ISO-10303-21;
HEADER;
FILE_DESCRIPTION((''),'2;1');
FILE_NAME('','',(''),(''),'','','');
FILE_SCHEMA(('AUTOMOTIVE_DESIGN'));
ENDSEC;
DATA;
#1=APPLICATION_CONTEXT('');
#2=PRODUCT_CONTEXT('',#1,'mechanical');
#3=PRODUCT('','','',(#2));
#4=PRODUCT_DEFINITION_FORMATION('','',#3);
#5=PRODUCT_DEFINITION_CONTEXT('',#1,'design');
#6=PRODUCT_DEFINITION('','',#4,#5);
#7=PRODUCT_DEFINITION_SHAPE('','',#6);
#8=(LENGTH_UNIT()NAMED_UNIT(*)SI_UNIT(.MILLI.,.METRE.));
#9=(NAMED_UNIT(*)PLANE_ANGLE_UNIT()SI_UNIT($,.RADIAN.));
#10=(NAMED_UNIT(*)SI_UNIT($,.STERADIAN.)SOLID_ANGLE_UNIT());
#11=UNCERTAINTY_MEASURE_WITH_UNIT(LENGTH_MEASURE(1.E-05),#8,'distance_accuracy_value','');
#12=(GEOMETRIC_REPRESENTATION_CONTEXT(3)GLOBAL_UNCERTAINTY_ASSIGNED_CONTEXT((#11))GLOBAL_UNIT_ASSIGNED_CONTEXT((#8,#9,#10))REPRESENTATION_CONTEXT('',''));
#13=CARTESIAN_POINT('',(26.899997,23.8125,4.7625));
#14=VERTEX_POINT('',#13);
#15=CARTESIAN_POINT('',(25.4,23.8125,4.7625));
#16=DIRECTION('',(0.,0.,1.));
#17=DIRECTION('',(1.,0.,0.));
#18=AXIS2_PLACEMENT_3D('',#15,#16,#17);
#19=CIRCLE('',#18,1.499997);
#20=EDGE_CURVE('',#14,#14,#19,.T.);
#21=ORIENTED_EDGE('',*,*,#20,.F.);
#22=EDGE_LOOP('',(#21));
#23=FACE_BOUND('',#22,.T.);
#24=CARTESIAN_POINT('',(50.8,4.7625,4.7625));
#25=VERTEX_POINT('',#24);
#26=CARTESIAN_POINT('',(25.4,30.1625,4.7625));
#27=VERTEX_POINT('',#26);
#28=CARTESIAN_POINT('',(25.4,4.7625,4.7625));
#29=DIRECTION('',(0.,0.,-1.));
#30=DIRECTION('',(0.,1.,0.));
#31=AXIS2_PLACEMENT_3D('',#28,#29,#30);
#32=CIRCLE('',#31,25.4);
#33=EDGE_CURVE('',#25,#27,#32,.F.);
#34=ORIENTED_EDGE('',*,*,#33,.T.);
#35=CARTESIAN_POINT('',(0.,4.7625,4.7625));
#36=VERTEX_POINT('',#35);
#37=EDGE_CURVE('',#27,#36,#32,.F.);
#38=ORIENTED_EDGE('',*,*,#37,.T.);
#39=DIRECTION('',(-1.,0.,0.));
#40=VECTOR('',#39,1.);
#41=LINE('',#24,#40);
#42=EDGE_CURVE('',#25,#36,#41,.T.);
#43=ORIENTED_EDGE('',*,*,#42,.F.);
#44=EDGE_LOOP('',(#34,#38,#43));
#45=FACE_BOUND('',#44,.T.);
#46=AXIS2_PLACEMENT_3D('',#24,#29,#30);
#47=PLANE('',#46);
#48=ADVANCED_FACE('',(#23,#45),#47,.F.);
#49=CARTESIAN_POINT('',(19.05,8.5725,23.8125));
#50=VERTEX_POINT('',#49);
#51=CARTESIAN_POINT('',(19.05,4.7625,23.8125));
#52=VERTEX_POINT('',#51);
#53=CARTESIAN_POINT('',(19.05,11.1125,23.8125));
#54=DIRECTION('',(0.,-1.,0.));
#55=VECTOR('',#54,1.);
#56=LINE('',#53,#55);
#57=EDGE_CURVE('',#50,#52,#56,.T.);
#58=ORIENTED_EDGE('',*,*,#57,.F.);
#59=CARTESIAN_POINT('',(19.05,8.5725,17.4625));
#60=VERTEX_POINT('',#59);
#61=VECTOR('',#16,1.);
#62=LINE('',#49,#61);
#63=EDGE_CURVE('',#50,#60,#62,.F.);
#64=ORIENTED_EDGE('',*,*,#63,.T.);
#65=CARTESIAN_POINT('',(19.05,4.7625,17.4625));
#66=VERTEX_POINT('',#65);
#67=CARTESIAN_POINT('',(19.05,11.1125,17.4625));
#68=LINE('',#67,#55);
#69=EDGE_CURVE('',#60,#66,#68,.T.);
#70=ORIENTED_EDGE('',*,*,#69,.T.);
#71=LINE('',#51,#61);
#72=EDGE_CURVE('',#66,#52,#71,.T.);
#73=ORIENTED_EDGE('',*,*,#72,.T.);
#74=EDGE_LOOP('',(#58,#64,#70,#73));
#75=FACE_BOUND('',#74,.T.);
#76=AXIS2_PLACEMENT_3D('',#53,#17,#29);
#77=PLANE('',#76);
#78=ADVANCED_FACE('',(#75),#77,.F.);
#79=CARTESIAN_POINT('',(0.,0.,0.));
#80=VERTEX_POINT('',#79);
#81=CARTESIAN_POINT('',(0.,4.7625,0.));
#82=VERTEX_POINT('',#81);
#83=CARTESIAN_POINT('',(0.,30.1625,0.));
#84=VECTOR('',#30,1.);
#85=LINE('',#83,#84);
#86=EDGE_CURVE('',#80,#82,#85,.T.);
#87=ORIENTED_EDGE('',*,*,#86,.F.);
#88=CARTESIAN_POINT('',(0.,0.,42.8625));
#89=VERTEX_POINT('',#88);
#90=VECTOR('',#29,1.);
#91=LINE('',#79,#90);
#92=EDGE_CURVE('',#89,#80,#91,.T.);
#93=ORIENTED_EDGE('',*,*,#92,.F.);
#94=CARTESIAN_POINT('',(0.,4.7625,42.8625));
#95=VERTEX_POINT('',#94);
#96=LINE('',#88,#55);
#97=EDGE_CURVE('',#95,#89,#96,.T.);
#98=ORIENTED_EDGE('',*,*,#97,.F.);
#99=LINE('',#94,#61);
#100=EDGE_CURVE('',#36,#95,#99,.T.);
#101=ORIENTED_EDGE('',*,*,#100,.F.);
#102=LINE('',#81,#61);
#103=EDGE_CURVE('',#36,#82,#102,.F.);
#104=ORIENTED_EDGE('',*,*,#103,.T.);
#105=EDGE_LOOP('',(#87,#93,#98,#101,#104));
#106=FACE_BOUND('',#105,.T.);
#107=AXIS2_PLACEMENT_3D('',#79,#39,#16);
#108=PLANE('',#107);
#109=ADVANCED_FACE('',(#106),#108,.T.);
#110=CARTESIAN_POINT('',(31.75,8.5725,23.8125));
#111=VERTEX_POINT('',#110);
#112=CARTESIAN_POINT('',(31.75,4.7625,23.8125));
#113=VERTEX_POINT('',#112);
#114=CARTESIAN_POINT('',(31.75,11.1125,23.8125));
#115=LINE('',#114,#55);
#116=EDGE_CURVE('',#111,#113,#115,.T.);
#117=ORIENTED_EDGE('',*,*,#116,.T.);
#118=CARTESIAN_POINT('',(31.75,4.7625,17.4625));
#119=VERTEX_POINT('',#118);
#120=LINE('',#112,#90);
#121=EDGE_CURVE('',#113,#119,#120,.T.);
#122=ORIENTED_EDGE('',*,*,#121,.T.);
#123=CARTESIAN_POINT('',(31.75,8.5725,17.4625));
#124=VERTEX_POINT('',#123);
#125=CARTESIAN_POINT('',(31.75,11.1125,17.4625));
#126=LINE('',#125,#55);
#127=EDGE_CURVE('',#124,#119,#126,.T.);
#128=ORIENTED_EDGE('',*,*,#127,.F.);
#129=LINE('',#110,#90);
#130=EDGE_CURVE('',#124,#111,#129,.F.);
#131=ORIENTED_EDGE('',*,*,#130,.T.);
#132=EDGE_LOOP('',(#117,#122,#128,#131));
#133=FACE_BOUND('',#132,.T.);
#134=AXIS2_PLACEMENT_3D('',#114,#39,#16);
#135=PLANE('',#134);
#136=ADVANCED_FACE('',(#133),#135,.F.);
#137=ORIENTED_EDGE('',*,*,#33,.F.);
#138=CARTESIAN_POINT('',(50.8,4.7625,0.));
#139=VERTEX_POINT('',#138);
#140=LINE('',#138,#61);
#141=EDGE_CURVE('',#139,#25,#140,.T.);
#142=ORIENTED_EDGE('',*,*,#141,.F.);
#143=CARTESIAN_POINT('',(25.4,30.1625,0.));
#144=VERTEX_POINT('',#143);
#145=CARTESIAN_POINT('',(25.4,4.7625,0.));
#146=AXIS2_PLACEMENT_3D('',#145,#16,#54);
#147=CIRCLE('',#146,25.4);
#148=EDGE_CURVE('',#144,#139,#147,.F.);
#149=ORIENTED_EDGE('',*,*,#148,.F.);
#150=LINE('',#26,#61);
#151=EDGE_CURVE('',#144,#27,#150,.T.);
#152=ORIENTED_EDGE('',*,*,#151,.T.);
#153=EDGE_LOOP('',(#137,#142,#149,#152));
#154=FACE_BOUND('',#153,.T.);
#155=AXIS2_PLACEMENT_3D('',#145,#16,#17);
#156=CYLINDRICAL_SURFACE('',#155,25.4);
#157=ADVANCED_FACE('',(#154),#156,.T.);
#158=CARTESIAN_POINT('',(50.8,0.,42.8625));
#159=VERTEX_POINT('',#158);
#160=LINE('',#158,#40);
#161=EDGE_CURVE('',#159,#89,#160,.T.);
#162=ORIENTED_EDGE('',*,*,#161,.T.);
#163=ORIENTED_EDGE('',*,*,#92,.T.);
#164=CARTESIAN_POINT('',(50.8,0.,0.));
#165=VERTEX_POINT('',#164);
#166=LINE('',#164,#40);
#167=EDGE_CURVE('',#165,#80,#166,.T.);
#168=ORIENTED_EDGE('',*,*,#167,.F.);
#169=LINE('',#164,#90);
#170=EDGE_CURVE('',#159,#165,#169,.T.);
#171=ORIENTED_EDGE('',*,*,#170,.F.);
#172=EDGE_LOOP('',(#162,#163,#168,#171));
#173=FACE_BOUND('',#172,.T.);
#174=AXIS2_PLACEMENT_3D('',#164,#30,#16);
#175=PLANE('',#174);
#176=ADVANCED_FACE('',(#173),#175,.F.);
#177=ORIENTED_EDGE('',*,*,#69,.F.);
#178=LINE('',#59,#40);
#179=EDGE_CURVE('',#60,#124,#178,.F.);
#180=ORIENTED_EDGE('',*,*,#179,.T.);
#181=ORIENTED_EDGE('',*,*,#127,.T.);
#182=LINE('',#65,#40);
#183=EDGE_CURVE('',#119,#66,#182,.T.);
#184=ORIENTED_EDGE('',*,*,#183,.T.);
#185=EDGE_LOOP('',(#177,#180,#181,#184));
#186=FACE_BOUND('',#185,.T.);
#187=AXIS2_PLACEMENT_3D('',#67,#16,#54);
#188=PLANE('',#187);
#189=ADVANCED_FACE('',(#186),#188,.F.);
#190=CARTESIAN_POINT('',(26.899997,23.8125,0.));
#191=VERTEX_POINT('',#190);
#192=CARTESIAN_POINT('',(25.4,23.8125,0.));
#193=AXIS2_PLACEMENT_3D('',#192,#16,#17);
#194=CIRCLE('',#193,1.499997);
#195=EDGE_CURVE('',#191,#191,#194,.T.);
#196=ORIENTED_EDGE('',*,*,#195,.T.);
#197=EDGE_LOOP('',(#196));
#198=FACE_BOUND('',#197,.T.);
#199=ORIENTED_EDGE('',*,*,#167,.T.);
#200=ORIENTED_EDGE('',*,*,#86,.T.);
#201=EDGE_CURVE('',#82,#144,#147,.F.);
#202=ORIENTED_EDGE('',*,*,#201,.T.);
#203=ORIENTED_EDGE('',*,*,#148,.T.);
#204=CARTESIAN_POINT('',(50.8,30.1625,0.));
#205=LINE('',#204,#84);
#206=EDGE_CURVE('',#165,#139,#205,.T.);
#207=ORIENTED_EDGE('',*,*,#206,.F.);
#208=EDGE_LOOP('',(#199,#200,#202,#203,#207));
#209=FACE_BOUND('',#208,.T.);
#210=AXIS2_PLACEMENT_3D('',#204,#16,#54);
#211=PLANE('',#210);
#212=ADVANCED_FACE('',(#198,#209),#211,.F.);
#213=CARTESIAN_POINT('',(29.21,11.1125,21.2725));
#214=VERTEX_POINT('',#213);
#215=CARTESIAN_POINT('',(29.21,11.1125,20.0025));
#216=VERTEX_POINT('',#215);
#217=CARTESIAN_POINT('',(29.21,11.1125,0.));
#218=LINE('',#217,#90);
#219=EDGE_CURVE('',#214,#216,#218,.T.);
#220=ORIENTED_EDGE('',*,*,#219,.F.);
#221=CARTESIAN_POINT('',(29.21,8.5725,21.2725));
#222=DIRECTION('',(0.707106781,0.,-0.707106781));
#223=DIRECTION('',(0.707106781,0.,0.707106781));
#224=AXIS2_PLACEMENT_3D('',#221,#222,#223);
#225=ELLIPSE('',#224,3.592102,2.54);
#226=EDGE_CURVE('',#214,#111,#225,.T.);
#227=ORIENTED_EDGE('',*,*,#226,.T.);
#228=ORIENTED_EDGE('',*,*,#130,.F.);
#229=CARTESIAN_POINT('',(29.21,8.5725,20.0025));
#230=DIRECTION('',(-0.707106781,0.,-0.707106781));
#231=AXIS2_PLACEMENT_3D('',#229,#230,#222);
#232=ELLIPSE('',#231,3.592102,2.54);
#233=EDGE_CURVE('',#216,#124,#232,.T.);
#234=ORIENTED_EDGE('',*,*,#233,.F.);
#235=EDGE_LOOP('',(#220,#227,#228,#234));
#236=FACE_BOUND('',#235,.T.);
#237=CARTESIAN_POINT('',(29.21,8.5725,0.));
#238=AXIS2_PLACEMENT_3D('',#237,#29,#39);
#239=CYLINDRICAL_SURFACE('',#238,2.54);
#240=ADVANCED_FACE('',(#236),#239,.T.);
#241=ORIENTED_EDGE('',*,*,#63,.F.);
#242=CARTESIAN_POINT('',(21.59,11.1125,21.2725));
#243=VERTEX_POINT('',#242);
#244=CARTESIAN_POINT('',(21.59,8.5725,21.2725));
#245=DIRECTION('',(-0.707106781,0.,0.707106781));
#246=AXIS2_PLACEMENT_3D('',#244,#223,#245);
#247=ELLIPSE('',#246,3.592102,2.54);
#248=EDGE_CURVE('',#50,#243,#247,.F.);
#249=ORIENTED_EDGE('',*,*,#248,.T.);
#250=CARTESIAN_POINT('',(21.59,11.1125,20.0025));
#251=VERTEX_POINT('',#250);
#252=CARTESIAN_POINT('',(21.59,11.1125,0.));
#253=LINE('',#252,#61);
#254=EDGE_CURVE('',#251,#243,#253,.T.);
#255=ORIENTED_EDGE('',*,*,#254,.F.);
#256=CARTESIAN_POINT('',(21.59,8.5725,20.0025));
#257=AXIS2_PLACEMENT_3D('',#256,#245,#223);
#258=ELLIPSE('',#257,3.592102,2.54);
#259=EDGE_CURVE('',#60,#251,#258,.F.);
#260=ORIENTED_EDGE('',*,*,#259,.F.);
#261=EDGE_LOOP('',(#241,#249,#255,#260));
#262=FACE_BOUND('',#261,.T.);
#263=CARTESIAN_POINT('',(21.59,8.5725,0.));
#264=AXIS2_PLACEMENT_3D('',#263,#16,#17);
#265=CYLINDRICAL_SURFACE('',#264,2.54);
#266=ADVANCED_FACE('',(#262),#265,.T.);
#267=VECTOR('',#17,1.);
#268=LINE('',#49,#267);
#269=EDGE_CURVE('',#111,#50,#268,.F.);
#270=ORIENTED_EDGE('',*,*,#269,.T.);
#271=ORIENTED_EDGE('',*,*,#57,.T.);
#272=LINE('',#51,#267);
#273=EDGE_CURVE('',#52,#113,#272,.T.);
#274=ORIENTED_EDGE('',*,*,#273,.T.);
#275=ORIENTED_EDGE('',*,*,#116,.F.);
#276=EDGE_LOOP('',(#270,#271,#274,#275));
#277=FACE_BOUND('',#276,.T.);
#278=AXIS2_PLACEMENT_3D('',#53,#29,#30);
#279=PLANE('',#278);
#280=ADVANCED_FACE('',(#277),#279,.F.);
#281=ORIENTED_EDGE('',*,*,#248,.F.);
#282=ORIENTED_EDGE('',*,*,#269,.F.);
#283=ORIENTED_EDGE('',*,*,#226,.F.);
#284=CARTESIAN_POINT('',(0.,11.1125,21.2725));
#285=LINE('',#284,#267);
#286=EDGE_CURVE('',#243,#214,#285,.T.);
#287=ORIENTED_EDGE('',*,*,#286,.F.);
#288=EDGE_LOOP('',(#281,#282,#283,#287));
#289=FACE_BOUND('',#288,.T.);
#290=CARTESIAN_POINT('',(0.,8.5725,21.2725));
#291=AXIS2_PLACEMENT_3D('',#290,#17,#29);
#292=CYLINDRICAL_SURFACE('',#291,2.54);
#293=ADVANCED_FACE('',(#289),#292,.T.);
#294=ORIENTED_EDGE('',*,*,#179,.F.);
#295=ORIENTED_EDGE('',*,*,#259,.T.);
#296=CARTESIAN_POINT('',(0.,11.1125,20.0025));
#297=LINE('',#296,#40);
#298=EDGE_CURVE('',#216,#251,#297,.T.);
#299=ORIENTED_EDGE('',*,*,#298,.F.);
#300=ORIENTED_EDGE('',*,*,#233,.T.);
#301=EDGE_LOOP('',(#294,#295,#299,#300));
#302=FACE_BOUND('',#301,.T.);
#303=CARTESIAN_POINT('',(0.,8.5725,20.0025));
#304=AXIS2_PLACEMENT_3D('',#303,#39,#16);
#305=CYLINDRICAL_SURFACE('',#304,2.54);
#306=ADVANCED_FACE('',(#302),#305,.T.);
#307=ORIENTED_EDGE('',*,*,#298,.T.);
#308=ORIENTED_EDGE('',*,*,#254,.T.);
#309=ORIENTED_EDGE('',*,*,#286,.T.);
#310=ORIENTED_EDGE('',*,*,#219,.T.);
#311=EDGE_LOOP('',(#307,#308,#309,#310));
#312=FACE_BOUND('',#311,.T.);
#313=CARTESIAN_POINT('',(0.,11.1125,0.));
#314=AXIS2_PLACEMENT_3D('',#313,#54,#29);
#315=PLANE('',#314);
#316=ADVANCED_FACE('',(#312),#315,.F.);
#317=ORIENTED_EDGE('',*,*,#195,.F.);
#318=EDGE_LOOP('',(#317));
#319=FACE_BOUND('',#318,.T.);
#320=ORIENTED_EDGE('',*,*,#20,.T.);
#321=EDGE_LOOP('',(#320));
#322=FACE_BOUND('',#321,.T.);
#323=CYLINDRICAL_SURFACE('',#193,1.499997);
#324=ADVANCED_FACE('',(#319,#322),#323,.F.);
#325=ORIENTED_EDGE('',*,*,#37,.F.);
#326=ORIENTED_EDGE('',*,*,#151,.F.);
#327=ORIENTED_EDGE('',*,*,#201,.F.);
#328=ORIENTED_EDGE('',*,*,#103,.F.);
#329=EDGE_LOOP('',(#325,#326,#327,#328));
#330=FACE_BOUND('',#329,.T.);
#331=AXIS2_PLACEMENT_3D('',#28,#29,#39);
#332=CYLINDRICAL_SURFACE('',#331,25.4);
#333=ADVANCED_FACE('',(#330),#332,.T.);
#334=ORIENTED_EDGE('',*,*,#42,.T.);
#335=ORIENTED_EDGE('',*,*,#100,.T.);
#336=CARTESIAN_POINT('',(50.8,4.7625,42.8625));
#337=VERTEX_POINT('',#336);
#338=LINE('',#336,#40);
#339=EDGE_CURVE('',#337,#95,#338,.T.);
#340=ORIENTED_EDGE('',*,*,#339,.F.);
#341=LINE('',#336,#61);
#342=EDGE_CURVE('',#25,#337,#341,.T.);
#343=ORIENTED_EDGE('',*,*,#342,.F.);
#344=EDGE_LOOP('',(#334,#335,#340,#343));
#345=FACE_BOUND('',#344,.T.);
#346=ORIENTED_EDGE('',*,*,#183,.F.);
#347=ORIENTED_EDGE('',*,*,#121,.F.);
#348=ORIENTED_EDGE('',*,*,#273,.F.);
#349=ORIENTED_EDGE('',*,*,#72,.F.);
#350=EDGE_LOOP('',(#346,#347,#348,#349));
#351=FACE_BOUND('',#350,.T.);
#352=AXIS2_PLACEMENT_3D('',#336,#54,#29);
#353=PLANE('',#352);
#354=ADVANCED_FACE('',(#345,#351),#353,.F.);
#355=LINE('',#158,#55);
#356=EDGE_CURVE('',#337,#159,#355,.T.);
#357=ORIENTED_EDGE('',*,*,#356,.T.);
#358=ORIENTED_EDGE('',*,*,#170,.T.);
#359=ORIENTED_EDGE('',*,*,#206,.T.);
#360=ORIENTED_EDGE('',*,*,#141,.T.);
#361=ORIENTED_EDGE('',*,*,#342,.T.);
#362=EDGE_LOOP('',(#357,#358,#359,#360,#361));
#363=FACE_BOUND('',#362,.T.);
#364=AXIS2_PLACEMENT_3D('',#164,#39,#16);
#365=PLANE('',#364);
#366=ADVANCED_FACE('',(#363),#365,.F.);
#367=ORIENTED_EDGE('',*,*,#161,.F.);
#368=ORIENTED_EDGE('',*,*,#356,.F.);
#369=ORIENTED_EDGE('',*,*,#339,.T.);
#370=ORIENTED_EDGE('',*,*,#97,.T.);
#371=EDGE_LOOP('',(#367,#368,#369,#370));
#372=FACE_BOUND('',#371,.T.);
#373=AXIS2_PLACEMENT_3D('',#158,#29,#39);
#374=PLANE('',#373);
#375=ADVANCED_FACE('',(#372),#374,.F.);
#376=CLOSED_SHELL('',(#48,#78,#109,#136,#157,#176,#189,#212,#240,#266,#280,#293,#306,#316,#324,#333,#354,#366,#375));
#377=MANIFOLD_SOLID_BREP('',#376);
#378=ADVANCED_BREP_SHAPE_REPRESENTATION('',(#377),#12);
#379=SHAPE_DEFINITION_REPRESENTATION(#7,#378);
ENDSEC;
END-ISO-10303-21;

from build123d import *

# Parameters (mm, degrees)
BOSS_EXTRUDE1_DEPTH = 50.8
SKETCH2_W           = 12.7
SKETCH2_H           = 6.35
BOSS_EXTRUDE2_DEPTH = 6.35
SKETCH3_R           = 1.499997
CUT_EXTRUDE1_DEPTH  = 71.299547696
FILLET1_R           = 2.54
FILLET2_R           = 25.4


with BuildPart() as part:
    # Sketch1 → Boss-Extrude1 (new body)
    with BuildSketch(Plane(origin=(0, 0, 0), x_dir=(0, 0, -1), z_dir=(1, 0, 0))):
        Polygon((0, 0), (-42.8625, 0), (-42.8625, 4.7625), (-4.7625, 4.7625), (-4.7625, 30.1625), (0, 30.1625), align=None)
    extrude(amount=BOSS_EXTRUDE1_DEPTH)

    # Sketch2 → Boss-Extrude2 (add)
    with BuildSketch(Plane(origin=(0, 4.7625, 0), x_dir=(1, 0, 0), z_dir=(0, 1, 0))):
        with Locations((25.4, -20.6375)):
            Rectangle(SKETCH2_W, SKETCH2_H)
    extrude(amount=BOSS_EXTRUDE2_DEPTH)

    # Sketch3 → Cut-Extrude1 (cut, through all)
    with BuildSketch(Plane.XY.offset(4.7625)):
        with Locations((25.4, 23.8125)):
            Circle(SKETCH3_R)
    extrude(amount=-CUT_EXTRUDE1_DEPTH, mode=Mode.SUBTRACT)

    # Fillet1
    fillet1_edges = [part.edges().sort_by_distance(p)[0] for p in [
        (19.05, 11.1125, 20.6375),
        (25.4, 11.1125, 23.8125),
        (31.75, 11.1125, 20.6375),
        (25.4, 11.1125, 17.4625),
    ]]
    fillet(fillet1_edges, radius=FILLET1_R)

    # Fillet2
    fillet2_edges = [part.edges().sort_by_distance(p)[0] for p in [
        (50.8, 30.1625, 2.38125),
        (0, 30.1625, 2.38125),
    ]]
    fillet(fillet2_edges, radius=FILLET2_R - 0.0001)  # a hair under: the kernel refuses the full size


solid = part.part
